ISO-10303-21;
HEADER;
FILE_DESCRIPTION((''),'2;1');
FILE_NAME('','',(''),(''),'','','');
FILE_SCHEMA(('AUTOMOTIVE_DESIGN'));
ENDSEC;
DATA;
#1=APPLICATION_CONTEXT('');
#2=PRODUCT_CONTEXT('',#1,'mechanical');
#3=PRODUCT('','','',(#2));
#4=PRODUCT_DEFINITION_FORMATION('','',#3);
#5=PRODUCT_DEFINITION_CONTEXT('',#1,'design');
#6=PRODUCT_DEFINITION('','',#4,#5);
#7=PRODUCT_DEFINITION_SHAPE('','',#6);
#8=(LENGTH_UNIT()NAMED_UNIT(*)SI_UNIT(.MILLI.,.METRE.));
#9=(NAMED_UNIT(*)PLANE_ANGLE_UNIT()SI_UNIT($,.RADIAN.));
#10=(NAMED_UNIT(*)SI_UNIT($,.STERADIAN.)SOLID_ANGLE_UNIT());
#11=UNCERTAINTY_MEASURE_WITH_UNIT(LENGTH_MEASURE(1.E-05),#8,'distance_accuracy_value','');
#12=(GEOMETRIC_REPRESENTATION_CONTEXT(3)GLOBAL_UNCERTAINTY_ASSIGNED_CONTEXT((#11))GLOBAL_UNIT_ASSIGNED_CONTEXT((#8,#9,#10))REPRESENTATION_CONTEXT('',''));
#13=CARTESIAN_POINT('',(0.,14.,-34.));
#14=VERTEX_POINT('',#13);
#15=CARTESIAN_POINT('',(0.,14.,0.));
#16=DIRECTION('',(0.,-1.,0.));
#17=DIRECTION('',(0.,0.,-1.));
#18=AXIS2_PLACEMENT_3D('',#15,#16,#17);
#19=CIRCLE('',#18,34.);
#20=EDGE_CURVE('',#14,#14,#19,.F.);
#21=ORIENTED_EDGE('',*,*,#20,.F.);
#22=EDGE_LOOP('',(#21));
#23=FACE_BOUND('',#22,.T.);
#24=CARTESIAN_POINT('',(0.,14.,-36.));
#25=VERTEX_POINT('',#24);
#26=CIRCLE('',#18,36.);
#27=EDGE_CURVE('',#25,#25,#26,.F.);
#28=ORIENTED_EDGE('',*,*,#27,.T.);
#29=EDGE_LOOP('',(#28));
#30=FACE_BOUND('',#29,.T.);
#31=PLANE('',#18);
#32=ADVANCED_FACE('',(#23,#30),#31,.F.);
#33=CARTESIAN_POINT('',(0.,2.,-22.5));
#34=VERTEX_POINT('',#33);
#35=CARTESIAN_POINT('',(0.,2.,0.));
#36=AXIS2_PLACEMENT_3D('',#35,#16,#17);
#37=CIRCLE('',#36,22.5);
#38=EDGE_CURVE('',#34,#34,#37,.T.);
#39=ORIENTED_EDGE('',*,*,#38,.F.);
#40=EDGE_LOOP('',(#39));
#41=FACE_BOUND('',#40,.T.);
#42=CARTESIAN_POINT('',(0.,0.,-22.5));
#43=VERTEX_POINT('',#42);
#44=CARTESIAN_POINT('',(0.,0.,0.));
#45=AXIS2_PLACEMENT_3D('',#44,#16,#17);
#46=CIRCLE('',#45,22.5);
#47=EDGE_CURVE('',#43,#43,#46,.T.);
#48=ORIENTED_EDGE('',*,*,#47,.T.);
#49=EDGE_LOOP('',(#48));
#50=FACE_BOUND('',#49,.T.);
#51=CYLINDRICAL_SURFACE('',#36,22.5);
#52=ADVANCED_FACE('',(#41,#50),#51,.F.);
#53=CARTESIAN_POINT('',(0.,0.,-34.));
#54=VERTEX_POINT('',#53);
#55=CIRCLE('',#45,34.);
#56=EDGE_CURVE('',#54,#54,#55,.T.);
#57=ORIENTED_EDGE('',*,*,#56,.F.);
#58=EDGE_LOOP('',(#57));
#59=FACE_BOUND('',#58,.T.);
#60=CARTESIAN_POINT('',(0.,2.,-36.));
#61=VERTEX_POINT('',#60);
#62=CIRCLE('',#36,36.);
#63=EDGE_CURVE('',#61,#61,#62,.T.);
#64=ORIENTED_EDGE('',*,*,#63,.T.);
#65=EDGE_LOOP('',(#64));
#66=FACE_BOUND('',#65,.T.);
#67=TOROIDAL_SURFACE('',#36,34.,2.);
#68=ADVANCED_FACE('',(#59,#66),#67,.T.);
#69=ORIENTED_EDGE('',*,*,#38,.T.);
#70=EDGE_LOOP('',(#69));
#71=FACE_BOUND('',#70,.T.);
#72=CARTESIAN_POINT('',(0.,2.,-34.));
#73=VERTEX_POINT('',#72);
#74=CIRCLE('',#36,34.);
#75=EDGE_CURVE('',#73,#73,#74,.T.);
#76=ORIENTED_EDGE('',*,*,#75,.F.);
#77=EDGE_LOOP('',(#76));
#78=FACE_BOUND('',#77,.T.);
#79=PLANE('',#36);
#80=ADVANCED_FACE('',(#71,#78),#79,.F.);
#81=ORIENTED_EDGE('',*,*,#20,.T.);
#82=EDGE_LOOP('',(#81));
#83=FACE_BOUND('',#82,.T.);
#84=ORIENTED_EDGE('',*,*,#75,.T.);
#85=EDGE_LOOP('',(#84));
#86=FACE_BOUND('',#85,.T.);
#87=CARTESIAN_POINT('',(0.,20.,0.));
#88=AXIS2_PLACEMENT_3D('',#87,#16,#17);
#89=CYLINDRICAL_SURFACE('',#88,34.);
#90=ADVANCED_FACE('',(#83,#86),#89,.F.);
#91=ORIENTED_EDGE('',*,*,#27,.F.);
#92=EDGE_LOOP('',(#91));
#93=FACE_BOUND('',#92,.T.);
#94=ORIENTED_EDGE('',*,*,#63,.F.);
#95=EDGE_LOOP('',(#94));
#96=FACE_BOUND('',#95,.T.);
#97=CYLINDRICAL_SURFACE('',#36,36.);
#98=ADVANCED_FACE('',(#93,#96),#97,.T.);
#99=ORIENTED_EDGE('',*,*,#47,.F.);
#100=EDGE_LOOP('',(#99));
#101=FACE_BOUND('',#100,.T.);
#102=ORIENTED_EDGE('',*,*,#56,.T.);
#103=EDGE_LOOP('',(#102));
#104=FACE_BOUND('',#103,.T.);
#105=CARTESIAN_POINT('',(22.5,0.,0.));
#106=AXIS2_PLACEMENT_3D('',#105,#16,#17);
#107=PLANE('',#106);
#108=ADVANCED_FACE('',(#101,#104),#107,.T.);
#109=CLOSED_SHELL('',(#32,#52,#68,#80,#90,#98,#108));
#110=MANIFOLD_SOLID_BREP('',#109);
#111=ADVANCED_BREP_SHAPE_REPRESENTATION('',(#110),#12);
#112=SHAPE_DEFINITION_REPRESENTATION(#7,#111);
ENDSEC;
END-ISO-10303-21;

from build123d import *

# Parameters (mm, degrees)
CUT_EXTRUDE1_DEPTH   = 5
SKETCH6_R            = 10.5
CUT_EXTRUDE2_DEPTH   = 5
CUT_EXTRUDE3_DEPTH   = 45
SKETCH8_R            = 40
CUT_EXTRUDE4_DEPTH   = 32
SKETCH9_R            = 34
SKETCH9_R_2          = 24.5
CUT_EXTRUDE5_DEPTH   = 18
SKETCH10_R           = 27
CUT_EXTRUDE6_DEPTH   = 14
INTERSECT1_START     = 14
INTERSECT1_OUTLINE_R = 42
INTERSECT1_DEPTH     = 48


# Read off the part's stored shape, not the designer's step: Intersect1
with BuildPart() as part:
    # Sketch1 → Revolve1 (revolve)
    with BuildSketch(Plane.XY, mode=Mode.PRIVATE) as revolve1_sk:
        with BuildLine():
            Line((22.5, 0), (34, 0))
            ThreePointArc((34, 0), (35.414213562, 0.585786438), (36, 2))
            Line((36, 2), (36, 20))
            Line((36, 20), (40, 20))
            ThreePointArc((40, 20), (41.414213562, 20.585786438), (42, 22))
            Line((42, 22), (42, 57))
            ThreePointArc((42, 57), (40.535533906, 60.535533906), (37, 62))
            Line((37, 62), (0, 62))
            Line((0, 62), (0, 20))
            Line((0, 20), (22.5, 20))
            Line((22.5, 20), (22.5, 0))
        make_face()
    revolve(revolve1_sk.sketch.rotate(Axis((0, 2, 0), (0, 1, 0)), 90), axis=Axis((0, 2, 0), (0, 1, 0)))

    # Sketch5 → Cut-Extrude1 (cut)
    with BuildSketch(Plane(origin=(0, 62, 0), x_dir=(1, 0, 0), z_dir=(0, 1, 0))):
        with BuildLine():
            Line((-42, 0), (-40, 0))
            Line((-40, 0), (40, 0))
            Line((40, 0), (42, 0))
            ThreePointArc((42, 0), (0, 42), (-42, 0))
        make_face()
    extrude(amount=-CUT_EXTRUDE1_DEPTH, mode=Mode.SUBTRACT)

    # Sketch6 → Cut-Extrude2 (cut)
    with BuildSketch(Plane.XY.offset(42)):
        with Locations((-2, 42)):
            Circle(SKETCH6_R)
    extrude(amount=-CUT_EXTRUDE2_DEPTH, mode=Mode.SUBTRACT)

    # Sketch7 → Cut-Extrude3 (cut)
    with BuildSketch(Plane.XZ.offset(-20)):
        with BuildLine():
            Line((-21, 0), (21, 0))
            ThreePointArc((21, 0), (0, -21), (-21, 0))
        make_face()
    extrude(amount=-CUT_EXTRUDE3_DEPTH, mode=Mode.SUBTRACT)

    # Sketch8 → Cut-Extrude4 (cut)
    with BuildSketch(Plane(origin=(0, 54.5, 0), x_dir=(1, 0, 0), z_dir=(0, 1, 0))):
        with Locations(Location((0, 0, 0), (0, 0, 270))):
            Circle(SKETCH8_R)
        with BuildLine():
            Line((22.912878475, -2), (-22.912878475, -2))
            ThreePointArc((-22.912878475, -2), (0, 23), (22.912878475, -2))
        make_face(mode=Mode.SUBTRACT)
    extrude(amount=-CUT_EXTRUDE4_DEPTH, mode=Mode.SUBTRACT)

    # Sketch9 → Cut-Extrude5 (cut)
    with BuildSketch(Plane(origin=(0, 2, 0), x_dir=(-1, 0, 0), z_dir=(0, -1, 0))):
        with Locations(Location((0, 0, 0), (0, 0, 90))):
            Circle(SKETCH9_R)
        with Locations(Location((0, 0, 0), (0, 0, 90))):
            Circle(SKETCH9_R_2, mode=Mode.SUBTRACT)
    extrude(amount=-CUT_EXTRUDE5_DEPTH, mode=Mode.SUBTRACT)

    # Sketch10 → Cut-Extrude6 (cut)
    with BuildSketch(Plane(origin=(0, 2, 0), x_dir=(-1, 0, 0), z_dir=(0, -1, 0))):
        Circle(SKETCH10_R)
    extrude(amount=-CUT_EXTRUDE6_DEPTH, mode=Mode.SUBTRACT)

    # Intersect1 outline → Intersect1 (cut)
    with BuildSketch(Plane(origin=(0, 0, 0), x_dir=(1, 0, 0), z_dir=(0, 1, 0)).offset(INTERSECT1_START)):
        Circle(INTERSECT1_OUTLINE_R)
        with BuildLine():
            ThreePointArc((-21, 0), (0, 21), (21, 0))
            Line((21, 0), (-21, 0))
        make_face(mode=Mode.SUBTRACT)
    extrude(amount=INTERSECT1_DEPTH, mode=Mode.SUBTRACT)


solid = part.part
